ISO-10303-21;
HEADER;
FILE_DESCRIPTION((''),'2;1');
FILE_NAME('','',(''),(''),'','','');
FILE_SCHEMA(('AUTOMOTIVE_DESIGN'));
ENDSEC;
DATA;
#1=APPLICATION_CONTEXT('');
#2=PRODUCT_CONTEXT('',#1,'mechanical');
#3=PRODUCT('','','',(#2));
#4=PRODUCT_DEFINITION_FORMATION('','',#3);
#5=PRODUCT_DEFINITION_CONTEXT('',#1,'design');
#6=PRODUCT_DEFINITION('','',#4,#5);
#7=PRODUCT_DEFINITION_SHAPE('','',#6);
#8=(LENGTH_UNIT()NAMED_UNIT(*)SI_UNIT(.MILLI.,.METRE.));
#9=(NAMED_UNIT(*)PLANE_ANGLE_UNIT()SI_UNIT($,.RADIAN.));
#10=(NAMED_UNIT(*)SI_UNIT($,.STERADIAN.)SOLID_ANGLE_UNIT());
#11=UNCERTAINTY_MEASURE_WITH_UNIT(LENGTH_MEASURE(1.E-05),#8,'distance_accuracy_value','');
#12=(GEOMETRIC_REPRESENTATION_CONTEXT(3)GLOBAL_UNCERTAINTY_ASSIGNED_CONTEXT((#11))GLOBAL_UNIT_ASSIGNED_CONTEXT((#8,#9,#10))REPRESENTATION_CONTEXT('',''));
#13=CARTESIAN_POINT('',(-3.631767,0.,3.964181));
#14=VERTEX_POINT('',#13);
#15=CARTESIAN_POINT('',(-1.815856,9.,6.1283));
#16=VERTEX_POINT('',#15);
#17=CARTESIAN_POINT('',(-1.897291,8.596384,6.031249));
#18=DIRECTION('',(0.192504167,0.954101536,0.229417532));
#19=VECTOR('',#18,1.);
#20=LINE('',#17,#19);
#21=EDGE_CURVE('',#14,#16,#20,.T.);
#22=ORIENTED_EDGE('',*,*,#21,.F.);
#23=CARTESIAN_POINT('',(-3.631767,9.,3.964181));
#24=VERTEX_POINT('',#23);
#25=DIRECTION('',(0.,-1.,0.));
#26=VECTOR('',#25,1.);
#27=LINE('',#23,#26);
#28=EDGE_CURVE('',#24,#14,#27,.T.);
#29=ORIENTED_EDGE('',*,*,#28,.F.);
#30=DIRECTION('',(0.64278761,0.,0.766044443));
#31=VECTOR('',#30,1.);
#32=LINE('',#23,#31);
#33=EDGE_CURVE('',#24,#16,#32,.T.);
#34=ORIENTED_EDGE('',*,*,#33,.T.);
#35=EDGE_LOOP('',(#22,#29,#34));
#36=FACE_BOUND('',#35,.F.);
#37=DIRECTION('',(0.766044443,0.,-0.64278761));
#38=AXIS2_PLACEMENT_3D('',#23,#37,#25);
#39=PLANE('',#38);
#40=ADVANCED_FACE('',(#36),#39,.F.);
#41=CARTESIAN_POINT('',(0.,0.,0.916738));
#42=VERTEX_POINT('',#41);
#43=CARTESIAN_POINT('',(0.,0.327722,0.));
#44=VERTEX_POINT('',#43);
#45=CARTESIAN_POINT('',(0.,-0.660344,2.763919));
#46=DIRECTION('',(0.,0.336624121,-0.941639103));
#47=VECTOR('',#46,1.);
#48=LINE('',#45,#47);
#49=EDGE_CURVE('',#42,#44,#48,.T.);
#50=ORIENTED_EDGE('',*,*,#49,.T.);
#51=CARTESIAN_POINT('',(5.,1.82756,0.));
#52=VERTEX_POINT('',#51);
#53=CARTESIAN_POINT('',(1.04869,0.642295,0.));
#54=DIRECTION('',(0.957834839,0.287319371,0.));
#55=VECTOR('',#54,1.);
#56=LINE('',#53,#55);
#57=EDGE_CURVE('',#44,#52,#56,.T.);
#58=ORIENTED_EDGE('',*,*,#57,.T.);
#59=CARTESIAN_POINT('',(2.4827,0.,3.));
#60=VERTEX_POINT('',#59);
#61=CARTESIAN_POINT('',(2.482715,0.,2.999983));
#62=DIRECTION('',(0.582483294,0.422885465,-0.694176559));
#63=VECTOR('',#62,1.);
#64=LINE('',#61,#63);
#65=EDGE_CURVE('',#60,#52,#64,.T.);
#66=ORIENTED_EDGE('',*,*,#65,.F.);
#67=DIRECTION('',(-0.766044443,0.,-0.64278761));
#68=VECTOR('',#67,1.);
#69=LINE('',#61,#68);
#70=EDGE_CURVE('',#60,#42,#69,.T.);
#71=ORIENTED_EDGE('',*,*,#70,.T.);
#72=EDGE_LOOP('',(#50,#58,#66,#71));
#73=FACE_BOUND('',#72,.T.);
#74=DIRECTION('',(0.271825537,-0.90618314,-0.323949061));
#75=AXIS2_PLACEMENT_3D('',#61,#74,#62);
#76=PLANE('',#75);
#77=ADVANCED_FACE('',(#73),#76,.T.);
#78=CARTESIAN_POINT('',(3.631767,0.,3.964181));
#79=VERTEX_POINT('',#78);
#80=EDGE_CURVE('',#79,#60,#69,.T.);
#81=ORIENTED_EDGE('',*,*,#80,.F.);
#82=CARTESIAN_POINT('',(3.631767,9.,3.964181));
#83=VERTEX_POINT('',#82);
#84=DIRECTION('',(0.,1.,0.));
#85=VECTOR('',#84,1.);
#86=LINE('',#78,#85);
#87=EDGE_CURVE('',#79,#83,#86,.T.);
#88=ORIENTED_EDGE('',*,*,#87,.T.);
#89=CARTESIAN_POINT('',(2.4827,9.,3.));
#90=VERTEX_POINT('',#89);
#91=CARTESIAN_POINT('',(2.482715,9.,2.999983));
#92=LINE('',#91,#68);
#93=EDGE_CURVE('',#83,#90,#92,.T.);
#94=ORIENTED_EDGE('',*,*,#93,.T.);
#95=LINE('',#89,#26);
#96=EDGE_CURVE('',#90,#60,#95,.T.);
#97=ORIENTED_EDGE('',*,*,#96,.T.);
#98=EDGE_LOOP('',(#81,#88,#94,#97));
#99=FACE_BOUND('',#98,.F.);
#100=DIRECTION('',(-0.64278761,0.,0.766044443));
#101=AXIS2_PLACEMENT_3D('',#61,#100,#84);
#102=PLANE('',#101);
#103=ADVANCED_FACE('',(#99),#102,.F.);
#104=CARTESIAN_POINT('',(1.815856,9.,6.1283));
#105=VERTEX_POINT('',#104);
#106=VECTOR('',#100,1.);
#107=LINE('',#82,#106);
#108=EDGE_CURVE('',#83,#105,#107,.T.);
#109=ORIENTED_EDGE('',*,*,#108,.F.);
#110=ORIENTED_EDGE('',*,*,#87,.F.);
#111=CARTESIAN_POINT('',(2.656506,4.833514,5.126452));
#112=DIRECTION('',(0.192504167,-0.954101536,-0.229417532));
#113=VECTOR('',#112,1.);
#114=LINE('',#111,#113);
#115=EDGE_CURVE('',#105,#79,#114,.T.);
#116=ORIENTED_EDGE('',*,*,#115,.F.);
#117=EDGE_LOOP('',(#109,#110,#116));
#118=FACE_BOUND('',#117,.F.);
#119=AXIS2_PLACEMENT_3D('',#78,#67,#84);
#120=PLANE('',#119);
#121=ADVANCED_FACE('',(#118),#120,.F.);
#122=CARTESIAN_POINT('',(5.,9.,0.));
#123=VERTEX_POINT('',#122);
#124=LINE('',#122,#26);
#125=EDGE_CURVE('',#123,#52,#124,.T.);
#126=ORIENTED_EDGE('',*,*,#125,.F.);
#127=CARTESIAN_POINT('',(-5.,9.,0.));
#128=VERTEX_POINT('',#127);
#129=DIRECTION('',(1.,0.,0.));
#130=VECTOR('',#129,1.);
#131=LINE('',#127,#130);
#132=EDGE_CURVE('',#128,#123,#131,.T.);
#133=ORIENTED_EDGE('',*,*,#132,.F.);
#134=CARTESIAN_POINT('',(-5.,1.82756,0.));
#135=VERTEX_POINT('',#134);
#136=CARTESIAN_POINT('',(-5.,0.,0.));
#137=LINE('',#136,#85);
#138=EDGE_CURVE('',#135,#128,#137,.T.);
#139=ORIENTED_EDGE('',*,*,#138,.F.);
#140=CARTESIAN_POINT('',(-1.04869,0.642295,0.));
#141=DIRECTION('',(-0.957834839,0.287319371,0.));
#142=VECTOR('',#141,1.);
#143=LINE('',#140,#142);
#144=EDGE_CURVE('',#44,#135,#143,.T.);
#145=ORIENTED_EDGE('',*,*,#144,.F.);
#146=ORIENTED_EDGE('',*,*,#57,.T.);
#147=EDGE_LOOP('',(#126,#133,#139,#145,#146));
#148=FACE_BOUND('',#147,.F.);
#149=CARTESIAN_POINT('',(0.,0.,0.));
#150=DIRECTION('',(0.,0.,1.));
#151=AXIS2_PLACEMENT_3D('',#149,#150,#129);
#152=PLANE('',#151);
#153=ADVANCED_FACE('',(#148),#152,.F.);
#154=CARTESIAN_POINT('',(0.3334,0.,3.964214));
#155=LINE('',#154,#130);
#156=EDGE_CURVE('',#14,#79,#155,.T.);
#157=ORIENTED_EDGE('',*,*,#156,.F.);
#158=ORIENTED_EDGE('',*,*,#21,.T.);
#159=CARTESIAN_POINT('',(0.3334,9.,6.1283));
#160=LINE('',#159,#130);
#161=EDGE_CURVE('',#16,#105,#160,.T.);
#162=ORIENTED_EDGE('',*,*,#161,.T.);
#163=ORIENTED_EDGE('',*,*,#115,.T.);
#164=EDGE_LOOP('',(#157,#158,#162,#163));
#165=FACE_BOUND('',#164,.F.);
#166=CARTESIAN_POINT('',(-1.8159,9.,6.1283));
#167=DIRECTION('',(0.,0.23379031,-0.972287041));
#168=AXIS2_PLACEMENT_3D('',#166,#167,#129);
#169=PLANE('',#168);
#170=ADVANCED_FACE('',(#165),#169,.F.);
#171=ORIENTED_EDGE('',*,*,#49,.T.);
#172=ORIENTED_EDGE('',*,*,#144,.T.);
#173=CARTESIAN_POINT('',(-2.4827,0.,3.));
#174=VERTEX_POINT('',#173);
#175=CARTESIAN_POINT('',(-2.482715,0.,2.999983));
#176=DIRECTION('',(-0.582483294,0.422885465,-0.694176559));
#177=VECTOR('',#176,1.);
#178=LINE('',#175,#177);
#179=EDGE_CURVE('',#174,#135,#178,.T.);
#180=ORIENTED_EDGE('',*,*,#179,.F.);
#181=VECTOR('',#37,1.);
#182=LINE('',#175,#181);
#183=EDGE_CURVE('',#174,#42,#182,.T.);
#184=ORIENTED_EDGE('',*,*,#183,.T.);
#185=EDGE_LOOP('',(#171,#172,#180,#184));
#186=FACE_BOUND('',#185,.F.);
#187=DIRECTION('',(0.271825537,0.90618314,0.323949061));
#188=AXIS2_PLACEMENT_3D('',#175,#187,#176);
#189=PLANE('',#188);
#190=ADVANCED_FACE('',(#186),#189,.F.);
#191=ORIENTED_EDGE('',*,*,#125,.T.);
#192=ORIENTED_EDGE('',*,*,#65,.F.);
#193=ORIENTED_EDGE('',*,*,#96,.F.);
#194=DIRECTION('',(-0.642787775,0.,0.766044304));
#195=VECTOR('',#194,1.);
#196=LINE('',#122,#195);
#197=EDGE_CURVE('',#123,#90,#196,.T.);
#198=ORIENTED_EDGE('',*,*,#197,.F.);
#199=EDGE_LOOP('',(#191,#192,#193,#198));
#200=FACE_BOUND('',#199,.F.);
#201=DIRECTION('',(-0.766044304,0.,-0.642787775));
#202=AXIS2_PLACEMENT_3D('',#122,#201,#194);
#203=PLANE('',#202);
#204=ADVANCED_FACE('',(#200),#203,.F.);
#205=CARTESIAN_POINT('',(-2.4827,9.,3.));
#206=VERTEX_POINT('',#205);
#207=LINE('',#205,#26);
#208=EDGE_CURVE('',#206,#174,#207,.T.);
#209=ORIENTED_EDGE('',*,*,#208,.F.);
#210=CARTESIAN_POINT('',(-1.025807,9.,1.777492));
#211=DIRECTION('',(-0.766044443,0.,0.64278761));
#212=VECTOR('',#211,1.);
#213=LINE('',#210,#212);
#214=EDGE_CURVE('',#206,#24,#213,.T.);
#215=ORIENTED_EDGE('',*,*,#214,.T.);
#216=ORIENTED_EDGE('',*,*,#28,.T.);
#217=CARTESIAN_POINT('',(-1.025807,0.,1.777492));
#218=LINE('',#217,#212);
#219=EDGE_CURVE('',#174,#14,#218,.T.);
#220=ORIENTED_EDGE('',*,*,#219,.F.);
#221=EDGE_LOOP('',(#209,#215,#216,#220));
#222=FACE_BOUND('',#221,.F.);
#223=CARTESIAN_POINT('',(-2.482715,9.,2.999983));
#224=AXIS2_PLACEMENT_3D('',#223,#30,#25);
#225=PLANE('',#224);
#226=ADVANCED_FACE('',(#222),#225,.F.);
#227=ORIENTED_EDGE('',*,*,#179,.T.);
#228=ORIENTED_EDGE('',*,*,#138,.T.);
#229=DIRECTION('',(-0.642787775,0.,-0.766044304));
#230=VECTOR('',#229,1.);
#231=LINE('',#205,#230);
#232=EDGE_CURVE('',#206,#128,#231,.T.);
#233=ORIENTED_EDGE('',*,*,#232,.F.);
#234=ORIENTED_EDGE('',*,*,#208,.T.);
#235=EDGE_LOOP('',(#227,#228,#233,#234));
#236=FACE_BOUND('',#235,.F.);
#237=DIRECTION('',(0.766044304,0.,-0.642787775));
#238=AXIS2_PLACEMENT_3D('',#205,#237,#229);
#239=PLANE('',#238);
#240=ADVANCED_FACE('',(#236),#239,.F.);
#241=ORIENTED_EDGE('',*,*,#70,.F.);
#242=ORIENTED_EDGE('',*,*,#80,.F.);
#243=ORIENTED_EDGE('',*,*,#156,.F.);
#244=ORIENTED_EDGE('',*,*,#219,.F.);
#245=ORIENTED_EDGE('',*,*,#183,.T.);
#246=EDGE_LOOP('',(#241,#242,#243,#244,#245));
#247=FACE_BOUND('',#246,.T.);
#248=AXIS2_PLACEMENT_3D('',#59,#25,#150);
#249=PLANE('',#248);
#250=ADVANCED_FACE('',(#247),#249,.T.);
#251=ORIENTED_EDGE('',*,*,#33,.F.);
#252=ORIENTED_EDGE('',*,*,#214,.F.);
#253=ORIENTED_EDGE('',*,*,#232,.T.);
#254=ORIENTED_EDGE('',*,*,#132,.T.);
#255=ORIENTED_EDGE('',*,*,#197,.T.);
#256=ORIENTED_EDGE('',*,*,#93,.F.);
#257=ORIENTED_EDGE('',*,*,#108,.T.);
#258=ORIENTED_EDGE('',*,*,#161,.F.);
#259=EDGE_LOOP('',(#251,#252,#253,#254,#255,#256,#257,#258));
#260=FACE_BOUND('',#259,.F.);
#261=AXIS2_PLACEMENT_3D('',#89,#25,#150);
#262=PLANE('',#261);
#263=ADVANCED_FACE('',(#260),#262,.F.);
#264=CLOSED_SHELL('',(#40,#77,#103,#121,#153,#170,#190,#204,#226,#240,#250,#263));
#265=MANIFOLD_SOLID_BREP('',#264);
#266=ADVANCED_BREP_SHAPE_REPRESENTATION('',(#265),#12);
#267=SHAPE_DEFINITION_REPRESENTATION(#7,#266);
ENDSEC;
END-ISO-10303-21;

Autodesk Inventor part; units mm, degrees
ref_plane "YZ Plane" through (0, 0, 0) normal (1, 0, 0) x (0, 1, 0)
ref_plane "XZ Plane" through (0, 0, 0) normal (0, 1, 0) x (-1, 0, 0)
sketch "スケッチ1" plane through (0, 0, 0) normal (0, 0, 1) x (1, 0, 0)
  line L0 (-5, 9) -> (5, 9)
  line L1 (5, 9) -> (5, 0)
  line L2 (5, 0) -> (-5, 0)
  line L3 (-5, 0) -> (-5, 9)
  line L4 (-8.0749, 9) -> (-5, 9) construction
  point P0 (0, 0)
  point P1 (0, 9)
  point P2 (0, 0)
  dimension "d0" = 9
  dimension "d1" = 10
  dimension "d2" = 10
extrude "押し出し1" add sketch "スケッチ1" along normal blind 3
sketch "スケッチ2" plane through (-5, 9, 0) normal (0, 1, 0) x (1, 0, 0)
  line L0 (0, -3) -> (10, -3) projected
  line L1 (0, 0) -> (10, 0) projected
  line L2 (2.5173, -3) -> (0, 0)
  line L3 (10, 0) -> (7.4827, -3)
  line L4 (0, 0) -> (0, -3) projected
  line L5 (10, 0) -> (10, -3) projected
  point P0 (5, 0)
  dimension "d5" = 80
  dimension "d6" = 40
  dimension "d7" = 40
extrude "押し出し2" cut sketch "スケッチ2" against normal through all contours L4 L2 L0 | L3 L5 L0
sketch "スケッチ3" plane through (-5, 0, 0) normal (-0.7660444, 0, 0.6427876) x (0.6427876, 0, 0.7660444)
  line L0 (3.9162, 0) -> (0, 0) projected
  line L1 (3.9162, 9) -> (3.9162, 0) projected
  line L2 (0, 9) -> (3.9162, 9) projected
  line L3 (0, 9) -> (0, 0) projected
  line L4 (3.9162, 0) -> (7.1079, 0) projected
  line L5 (3.9162, 0) -> (-11.0838, 7)
  point P0 (3.2139, 0)
  point P1 (0, 1.8276)
  dimension "d10" = 15
  dimension "d11" = 7
extrude "押し出し3" cut sketch "スケッチ3" against normal through all contours L0 L3 L5
sketch "スケッチ4" plane through (5, 0, 0) normal (0.7660444, 0, 0.6427876) x (0.6427876, 0, -0.7660444)
  line L0 (0, 0) -> (-3.9162, 0) projected
  line L1 (0, 0) -> (0, 9) projected
  line L2 (-3.9162, 9) -> (0, 9) projected
  line L3 (-3.9162, 0) -> (-3.9162, 9) projected
  line L4 (-3.9162, 0) -> (11.0838, 7)
  point P0 (-3.2139, 0)
  point P1 (0, 1.8276)
  dimension "d14" = 15
  dimension "d15" = 7
extrude "押し出し4" cut sketch "スケッチ4" against normal through all contours L0 L4 L1
sketch "スケッチ5" plane through (0, 0, 3) normal (0, 0, 1) x (1, 0, 0)
  line L0 (-2.4827, 9) -> (-2.4827, 0) projected
  line L1 (-2.4827, 0) -> (2.4827, 0) projected
  line L2 (2.4827, 0) -> (2.4827, 9) projected
  line L3 (2.4827, 9) -> (-2.4827, 9) projected
  point P0 (0, 0)
extrude "押し出し5" add sketch "スケッチ5" along normal blind 10
sketch "スケッチ6" plane through (-2.4827, 0, 3) normal (-1, 0, 0) x (0, 0, 1)
  line L0 (0, 9) -> (0, 0) projected
  line L1 (0, 0) -> (10, 0) projected
  line L2 (10, 9) -> (10, 0) projected
  line L3 (0, 9) -> (10, 9) projected
  point P0 (-3, 0)
extrude "押し出し6" add sketch "スケッチ6" along normal blind 10
sketch "スケッチ7" plane through (2.4827, 0, 3) normal (1, 0, 0) x (0, 0, -1)
  line L0 (0, 0) -> (0, 9) projected
  line L1 (0, 9) -> (-10, 9) projected
  line L2 (-10, 0) -> (-10, 9) projected
  line L3 (0, 0) -> (-10, 0) projected
  point P0 (3, 0)
extrude "押し出し7" add sketch "スケッチ7" along normal blind 10
sketch "スケッチ8" plane through (5, 1.8276, 0) normal (0.7660444, 0, 0.6427876) x (0.6427876, 0, -0.7660444)
  line L0 (-7.1079, 7.1724) -> (-7.1079, -1.8276) projected
  line L1 (-3.9162, -1.8276) -> (0, 0) projected
  line L2 (0, 0) -> (0, 7.1724) projected
  line L3 (-3.9162, 7.1724) -> (0, 7.1724) projected
  line L4 (-3.9162, -1.8276) -> (-3.9162, 7.1724) projected
  line L5 (-3.9162, 20) -> (16.0838, 20)
  line L6 (16.0838, 20) -> (16.0838, -10)
  line L7 (16.0838, -10) -> (-3.9162, -10)
  line L8 (-3.9162, -10) -> (-3.9162, 20)
  point P0 (-3.2139, -1.8276)
  point P1 (-3.9162, -1.8276)
  point P2 (-3.9162, 7.1724)
extrude "押し出し8" cut sketch "スケッチ8" along normal through all
sketch "スケッチ9" plane through (-5, 1.8276, 0) normal (-0.7660444, 0, 0.6427876) x (0.6427876, 0, 0.7660444)
  line L0 (0, 0) -> (3.9162, -1.8276) projected
  line L1 (3.9162, 7.1724) -> (3.9162, -1.8276) projected
  line L2 (0, 7.1724) -> (3.9162, 7.1724) projected
  line L3 (0, 7.1724) -> (0, 0) projected
  line L4 (-16.0838, 20) -> (3.9162, 20)
  line L5 (3.9162, 20) -> (3.9162, -20)
  line L6 (3.9162, -20) -> (-16.0838, -20)
  line L7 (-16.0838, -20) -> (-16.0838, 20)
  point P0 (3.2139, -1.8276)
  point P1 (3.9162, 7.1724)
  point P2 (3.9162, -1.8276)
extrude "押し出し9" cut sketch "スケッチ9" along normal through all
sketch "スケッチ10" plane through (2.4827, 0, 3) normal (0.6427876, 0, -0.7660444) x (-0.7660444, 0, -0.6427876)
  line L0 (-13.0541, 9) -> (0, 9) projected
  line L1 (0, 0) -> (0, 9) projected
  line L2 (-1.5, 9) -> (0, 9)
  line L3 (0, 9) -> (0, 0)
  line L4 (0, 0) -> (-1.5, 0)
  line L5 (-1.5, 0) -> (-1.5, 9)
  line L6 (-13.0541, 9) -> (0, 9) projected
  line L7 (-13.0541, 0) -> (-13.0541, 9) projected
  line L8 (0, 0) -> (-13.0541, 0) projected
  line L9 (0, 0) -> (0, 9) projected
  line L10 (-20, 9) -> (-13.0541, 9)
  line L11 (-13.0541, 9) -> (-13.0541, 0)
  line L12 (-13.0541, 0) -> (-20, 0)
  line L13 (-20, 0) -> (-20, 9)
  line L14 (-13.0541, 0) -> (-13.0541, 9) projected
  line L15 (0, 0) -> (-13.0541, 0) projected
  point P0 (3.8302, 0)
  point P1 (-1.5, 0)
  dimension "d28" = 1.5
extrude "押し出し10" cut sketch "スケッチ10" against normal through all contours L0 L5 L8 L7 | L7 L12 L13 L10
sketch "スケッチ11" plane through (-2.4827, 0, 3) normal (-0.6427876, 0, -0.7660444) x (-0.7660444, 0, 0.6427876)
  line L0 (-7.6604, 9) -> (0, 9) projected
  line L1 (-4.0642, 0) -> (7.552, 0) projected
  line L2 (0, 9) -> (1.5, 9)
  line L3 (1.5, 9) -> (1.5, 0)
  line L4 (1.5, 0) -> (0, 0)
  line L5 (0, 0) -> (0, 9)
  line L6 (1.5, 9) -> (20, 9)
  line L7 (20, 9) -> (20, 0)
  line L8 (20, 0) -> (1.5, 0)
  line L9 (1.5, 0) -> (1.5, 9)
  line L10 (13.0541, 0) -> (0, 0) projected
  point P0 (-3.8302, 0)
  dimension "d31" = 1.5
extrude "押し出し11" cut sketch "スケッチ11" against normal through all contours L3 L6 L7 L8 L1
ref_plane "作業平面1" through (-1.8159, 9, 6.1283) normal (0, 0.2337903, -0.972287) x (1, 0, 0)
sketch "スケッチ12" plane through (-1.8159, 9, 6.1283) normal (0, 0.2337903, -0.972287) x (1, 0, 0)
  line L0 (-10, -6.5677) -> (20, -6.5677)
  line L1 (20, -6.5677) -> (20, 15.9547)
  line L2 (20, 15.9547) -> (-10, 15.9547)
  line L3 (-10, 15.9547) -> (-10, -6.5677)
  point P0 (1.8159, 10.1833)
extrude "押し出し12" cut sketch "スケッチ12" against normal through all
equation "\"d6\" = d7"
properties part number "antana_middle_ex"
